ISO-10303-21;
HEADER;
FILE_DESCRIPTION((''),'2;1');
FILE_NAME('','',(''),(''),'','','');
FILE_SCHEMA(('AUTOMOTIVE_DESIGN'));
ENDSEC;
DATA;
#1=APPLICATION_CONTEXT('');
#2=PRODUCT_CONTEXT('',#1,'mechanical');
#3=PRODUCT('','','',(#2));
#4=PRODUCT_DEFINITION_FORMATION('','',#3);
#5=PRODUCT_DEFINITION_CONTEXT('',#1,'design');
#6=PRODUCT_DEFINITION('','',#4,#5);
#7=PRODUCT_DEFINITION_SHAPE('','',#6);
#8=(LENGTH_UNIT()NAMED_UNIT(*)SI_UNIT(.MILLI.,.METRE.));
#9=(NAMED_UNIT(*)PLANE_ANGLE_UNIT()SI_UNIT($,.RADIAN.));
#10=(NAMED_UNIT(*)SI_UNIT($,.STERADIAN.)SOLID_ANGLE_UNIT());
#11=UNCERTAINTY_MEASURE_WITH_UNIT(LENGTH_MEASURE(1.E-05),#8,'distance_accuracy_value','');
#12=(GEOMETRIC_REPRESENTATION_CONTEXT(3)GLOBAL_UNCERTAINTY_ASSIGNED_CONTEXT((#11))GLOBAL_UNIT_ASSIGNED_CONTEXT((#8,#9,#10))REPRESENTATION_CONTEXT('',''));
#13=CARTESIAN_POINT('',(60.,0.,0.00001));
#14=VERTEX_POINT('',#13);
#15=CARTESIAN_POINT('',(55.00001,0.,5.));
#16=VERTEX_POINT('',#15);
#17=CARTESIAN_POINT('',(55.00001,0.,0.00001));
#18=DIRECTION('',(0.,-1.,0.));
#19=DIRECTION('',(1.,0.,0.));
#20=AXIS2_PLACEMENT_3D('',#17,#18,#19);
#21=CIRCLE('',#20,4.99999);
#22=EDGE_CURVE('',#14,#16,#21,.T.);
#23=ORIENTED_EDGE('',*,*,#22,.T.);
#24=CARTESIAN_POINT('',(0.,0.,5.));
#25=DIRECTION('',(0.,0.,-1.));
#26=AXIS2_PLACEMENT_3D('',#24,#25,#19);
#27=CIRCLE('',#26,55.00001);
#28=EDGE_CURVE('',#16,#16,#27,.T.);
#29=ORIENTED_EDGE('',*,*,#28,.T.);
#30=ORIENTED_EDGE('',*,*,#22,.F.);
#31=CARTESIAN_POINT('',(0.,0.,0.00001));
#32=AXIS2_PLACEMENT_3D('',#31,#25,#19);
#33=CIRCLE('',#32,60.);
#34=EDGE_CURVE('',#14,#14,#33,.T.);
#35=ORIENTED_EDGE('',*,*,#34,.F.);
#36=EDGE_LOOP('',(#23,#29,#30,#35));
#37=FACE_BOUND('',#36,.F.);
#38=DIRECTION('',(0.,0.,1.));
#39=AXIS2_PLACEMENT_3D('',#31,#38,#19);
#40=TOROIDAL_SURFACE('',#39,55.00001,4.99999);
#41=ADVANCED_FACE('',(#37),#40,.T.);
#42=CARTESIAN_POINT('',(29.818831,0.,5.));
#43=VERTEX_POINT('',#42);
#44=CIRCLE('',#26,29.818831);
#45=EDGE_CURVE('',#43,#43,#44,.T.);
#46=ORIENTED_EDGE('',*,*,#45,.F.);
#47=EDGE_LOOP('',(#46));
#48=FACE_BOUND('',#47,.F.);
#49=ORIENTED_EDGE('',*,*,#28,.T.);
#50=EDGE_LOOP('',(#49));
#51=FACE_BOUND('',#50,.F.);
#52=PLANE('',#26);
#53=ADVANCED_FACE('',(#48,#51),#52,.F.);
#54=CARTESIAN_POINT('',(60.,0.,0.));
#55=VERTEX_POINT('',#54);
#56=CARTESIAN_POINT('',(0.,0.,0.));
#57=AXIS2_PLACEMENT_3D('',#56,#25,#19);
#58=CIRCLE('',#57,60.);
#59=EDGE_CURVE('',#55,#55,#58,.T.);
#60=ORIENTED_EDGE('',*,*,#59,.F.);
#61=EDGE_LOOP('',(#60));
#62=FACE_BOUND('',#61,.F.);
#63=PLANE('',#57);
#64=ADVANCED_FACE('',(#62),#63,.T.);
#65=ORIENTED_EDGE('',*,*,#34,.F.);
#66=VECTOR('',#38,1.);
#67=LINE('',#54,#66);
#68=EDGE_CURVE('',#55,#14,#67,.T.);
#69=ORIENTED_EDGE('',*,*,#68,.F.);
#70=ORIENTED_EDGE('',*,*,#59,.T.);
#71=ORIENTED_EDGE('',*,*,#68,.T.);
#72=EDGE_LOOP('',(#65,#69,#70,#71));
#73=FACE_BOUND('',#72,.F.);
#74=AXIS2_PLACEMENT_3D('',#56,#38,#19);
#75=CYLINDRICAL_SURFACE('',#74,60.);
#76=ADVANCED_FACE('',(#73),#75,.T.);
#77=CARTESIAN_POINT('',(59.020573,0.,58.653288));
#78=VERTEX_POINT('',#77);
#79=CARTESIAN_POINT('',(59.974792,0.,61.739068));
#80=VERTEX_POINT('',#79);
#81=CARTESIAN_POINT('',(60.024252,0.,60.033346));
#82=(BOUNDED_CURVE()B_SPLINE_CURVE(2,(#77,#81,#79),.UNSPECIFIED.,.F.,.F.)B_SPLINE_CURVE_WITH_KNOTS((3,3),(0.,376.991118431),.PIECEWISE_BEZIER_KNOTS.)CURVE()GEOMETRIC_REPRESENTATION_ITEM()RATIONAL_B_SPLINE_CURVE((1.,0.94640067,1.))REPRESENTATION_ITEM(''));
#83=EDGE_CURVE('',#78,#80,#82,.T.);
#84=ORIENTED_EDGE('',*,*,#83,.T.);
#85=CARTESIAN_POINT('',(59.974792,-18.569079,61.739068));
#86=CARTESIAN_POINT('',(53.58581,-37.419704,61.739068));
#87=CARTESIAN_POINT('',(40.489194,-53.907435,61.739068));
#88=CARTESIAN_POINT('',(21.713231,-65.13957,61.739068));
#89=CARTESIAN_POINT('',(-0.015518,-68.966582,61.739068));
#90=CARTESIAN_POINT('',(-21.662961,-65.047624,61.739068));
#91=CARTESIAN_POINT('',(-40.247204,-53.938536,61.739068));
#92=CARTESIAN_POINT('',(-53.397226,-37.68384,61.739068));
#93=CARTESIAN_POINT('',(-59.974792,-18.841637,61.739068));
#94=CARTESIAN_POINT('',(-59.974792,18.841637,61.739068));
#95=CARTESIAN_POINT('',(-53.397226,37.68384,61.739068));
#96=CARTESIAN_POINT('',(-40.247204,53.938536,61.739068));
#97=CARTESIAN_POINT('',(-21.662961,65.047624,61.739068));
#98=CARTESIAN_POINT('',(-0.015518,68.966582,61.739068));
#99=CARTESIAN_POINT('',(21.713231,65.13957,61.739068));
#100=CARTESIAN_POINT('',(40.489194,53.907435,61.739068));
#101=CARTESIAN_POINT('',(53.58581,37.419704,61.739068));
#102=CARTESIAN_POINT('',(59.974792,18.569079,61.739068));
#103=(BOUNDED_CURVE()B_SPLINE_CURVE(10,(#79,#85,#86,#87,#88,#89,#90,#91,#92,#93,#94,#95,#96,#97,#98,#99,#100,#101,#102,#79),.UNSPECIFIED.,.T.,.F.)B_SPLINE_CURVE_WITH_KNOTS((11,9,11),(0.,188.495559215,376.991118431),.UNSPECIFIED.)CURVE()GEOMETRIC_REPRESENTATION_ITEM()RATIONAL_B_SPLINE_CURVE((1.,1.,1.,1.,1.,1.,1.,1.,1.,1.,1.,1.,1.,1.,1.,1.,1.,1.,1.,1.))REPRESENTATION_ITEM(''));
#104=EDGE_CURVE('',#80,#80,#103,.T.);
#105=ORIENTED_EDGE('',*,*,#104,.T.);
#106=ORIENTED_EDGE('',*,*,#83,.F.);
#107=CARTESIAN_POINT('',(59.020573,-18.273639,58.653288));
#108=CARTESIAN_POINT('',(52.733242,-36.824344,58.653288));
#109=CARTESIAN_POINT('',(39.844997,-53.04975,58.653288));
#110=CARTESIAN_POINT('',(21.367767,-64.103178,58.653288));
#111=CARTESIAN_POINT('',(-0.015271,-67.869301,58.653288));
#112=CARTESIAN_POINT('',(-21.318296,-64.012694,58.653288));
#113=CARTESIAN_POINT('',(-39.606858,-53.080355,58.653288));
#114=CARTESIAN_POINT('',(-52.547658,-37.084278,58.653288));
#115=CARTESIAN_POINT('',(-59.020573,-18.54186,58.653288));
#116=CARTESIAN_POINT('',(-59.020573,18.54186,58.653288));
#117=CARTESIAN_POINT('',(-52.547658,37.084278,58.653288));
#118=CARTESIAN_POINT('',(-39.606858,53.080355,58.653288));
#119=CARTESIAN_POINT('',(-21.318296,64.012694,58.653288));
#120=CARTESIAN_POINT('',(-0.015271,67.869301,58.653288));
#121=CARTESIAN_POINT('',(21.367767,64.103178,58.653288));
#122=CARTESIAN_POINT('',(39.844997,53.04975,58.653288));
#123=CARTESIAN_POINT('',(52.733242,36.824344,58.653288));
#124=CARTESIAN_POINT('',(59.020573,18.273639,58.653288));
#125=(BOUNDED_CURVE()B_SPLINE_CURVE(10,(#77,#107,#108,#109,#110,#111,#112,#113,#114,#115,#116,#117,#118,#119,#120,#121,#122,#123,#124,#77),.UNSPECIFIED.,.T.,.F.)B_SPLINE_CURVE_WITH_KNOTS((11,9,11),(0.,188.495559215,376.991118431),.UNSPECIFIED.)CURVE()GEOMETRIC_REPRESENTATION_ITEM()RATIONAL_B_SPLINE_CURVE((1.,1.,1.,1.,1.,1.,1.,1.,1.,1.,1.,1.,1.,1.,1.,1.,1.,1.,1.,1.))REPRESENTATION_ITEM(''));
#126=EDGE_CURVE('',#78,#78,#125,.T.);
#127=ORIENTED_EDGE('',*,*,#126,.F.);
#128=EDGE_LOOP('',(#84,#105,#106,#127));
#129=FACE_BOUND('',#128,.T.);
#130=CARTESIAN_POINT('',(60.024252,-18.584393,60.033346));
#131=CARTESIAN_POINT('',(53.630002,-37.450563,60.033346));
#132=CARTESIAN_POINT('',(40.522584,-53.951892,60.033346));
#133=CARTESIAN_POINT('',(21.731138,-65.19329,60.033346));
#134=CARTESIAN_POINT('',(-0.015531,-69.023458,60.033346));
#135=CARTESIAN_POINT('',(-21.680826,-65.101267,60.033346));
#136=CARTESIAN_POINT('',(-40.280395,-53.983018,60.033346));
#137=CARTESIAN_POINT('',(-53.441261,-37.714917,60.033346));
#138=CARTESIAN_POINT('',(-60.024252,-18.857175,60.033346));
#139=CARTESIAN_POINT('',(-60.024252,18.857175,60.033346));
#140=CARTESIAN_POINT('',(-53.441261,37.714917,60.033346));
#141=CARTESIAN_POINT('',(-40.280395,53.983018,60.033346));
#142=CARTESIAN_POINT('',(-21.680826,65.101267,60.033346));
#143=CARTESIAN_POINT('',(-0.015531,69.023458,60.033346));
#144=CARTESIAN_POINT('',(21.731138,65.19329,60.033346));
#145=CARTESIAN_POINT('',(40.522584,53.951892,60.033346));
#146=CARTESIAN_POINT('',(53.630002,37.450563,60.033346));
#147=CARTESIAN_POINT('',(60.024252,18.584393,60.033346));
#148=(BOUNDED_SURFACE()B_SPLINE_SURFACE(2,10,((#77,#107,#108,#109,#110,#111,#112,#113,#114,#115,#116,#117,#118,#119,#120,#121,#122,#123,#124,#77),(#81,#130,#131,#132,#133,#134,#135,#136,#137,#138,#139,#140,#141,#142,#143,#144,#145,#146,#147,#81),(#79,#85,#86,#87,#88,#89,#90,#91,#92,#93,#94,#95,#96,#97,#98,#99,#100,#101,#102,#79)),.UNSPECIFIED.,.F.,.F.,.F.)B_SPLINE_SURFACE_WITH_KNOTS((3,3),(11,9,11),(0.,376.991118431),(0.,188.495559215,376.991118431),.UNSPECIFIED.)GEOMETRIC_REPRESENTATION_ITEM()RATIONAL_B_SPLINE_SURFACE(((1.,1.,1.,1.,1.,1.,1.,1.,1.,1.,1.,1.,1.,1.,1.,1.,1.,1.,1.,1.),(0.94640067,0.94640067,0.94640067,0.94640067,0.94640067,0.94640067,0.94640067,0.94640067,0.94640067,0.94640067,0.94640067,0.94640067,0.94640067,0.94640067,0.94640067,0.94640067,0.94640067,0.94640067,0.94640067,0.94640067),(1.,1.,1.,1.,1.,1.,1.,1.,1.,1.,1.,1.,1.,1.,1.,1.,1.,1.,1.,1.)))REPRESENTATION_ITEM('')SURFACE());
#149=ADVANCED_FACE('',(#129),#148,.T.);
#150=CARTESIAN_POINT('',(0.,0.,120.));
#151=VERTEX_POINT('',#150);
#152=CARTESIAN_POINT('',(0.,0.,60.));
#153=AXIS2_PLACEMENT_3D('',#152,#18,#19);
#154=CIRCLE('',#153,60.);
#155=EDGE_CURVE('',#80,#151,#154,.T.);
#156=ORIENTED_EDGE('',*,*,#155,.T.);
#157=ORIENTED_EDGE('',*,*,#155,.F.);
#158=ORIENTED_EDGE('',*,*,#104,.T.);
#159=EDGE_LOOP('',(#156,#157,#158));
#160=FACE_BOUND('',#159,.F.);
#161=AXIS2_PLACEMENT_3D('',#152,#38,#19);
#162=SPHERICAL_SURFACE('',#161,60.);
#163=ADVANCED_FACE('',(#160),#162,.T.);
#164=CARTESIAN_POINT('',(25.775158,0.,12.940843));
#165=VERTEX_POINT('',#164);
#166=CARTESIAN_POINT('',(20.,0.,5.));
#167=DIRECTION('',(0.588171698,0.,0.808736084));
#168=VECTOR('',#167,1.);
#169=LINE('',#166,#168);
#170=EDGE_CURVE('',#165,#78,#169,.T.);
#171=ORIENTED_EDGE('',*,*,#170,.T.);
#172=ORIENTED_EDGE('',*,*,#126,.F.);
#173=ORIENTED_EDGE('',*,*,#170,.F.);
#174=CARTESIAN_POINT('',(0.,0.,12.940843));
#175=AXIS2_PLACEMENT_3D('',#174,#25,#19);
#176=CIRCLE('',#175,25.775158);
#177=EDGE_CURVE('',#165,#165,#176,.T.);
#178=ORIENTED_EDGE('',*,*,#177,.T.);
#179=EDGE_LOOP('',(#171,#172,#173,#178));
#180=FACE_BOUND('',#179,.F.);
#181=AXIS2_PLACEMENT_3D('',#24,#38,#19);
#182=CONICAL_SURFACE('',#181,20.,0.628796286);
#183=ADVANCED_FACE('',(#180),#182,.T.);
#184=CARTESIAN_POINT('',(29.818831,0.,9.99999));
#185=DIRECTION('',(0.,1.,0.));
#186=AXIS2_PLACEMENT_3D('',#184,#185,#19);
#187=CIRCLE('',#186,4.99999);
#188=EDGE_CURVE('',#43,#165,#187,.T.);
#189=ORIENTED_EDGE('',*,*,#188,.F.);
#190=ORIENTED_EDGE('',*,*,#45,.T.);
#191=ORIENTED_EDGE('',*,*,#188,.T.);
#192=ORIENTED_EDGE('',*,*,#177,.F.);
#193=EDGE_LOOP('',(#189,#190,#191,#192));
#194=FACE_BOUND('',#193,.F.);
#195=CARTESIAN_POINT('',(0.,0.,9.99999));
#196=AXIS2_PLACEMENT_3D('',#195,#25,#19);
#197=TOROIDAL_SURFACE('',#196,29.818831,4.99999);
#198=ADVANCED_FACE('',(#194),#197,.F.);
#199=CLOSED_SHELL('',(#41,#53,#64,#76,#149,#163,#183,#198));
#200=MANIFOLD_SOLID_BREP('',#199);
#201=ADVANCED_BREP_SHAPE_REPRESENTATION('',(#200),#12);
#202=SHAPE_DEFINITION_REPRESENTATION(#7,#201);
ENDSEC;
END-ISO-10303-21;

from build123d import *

# Parameters (mm, degrees)
F2_R = 4.99999
F3_R = 5


# Not quite as in the source:
# - a fillet or chamfer is up to 0.001 mm smaller than in the source, because OpenCascade refuses the exact size


with BuildPart() as f1:
    # F0 (on Front) → F1 (revolve)
    with BuildSketch(Plane.XZ):
        with BuildLine():
            Line((0, 120), (0, 0))
            Line((0, 0), (60, 0))
            Line((60, 0), (60, 5))
            Line((60, 5), (20, 5))
            Line((20, 5), (60, 60))
            ThreePointArc((60, 60), (42.4264068712, 102.4264068712), (0, 120))
        make_face()
    revolve(axis=Axis((0, 0, 60), (0, 0, -1)))

    # F2 (radius 5 in the source; OpenCascade refuses exactly that, so slightly less here)
    f2_edges = [f1.edges().sort_by_distance(p)[0] for p in [
        (-60, 0, 5),
        (-20, 0, 5),
    ]]
    fillet(f2_edges, radius=F2_R)

    # F3
    f3_edges = [f1.edges().sort_by_distance(p)[0] for p in [
        (-60, 0, 60),
    ]]
    fillet(f3_edges, radius=F3_R)


solid = f1.part
